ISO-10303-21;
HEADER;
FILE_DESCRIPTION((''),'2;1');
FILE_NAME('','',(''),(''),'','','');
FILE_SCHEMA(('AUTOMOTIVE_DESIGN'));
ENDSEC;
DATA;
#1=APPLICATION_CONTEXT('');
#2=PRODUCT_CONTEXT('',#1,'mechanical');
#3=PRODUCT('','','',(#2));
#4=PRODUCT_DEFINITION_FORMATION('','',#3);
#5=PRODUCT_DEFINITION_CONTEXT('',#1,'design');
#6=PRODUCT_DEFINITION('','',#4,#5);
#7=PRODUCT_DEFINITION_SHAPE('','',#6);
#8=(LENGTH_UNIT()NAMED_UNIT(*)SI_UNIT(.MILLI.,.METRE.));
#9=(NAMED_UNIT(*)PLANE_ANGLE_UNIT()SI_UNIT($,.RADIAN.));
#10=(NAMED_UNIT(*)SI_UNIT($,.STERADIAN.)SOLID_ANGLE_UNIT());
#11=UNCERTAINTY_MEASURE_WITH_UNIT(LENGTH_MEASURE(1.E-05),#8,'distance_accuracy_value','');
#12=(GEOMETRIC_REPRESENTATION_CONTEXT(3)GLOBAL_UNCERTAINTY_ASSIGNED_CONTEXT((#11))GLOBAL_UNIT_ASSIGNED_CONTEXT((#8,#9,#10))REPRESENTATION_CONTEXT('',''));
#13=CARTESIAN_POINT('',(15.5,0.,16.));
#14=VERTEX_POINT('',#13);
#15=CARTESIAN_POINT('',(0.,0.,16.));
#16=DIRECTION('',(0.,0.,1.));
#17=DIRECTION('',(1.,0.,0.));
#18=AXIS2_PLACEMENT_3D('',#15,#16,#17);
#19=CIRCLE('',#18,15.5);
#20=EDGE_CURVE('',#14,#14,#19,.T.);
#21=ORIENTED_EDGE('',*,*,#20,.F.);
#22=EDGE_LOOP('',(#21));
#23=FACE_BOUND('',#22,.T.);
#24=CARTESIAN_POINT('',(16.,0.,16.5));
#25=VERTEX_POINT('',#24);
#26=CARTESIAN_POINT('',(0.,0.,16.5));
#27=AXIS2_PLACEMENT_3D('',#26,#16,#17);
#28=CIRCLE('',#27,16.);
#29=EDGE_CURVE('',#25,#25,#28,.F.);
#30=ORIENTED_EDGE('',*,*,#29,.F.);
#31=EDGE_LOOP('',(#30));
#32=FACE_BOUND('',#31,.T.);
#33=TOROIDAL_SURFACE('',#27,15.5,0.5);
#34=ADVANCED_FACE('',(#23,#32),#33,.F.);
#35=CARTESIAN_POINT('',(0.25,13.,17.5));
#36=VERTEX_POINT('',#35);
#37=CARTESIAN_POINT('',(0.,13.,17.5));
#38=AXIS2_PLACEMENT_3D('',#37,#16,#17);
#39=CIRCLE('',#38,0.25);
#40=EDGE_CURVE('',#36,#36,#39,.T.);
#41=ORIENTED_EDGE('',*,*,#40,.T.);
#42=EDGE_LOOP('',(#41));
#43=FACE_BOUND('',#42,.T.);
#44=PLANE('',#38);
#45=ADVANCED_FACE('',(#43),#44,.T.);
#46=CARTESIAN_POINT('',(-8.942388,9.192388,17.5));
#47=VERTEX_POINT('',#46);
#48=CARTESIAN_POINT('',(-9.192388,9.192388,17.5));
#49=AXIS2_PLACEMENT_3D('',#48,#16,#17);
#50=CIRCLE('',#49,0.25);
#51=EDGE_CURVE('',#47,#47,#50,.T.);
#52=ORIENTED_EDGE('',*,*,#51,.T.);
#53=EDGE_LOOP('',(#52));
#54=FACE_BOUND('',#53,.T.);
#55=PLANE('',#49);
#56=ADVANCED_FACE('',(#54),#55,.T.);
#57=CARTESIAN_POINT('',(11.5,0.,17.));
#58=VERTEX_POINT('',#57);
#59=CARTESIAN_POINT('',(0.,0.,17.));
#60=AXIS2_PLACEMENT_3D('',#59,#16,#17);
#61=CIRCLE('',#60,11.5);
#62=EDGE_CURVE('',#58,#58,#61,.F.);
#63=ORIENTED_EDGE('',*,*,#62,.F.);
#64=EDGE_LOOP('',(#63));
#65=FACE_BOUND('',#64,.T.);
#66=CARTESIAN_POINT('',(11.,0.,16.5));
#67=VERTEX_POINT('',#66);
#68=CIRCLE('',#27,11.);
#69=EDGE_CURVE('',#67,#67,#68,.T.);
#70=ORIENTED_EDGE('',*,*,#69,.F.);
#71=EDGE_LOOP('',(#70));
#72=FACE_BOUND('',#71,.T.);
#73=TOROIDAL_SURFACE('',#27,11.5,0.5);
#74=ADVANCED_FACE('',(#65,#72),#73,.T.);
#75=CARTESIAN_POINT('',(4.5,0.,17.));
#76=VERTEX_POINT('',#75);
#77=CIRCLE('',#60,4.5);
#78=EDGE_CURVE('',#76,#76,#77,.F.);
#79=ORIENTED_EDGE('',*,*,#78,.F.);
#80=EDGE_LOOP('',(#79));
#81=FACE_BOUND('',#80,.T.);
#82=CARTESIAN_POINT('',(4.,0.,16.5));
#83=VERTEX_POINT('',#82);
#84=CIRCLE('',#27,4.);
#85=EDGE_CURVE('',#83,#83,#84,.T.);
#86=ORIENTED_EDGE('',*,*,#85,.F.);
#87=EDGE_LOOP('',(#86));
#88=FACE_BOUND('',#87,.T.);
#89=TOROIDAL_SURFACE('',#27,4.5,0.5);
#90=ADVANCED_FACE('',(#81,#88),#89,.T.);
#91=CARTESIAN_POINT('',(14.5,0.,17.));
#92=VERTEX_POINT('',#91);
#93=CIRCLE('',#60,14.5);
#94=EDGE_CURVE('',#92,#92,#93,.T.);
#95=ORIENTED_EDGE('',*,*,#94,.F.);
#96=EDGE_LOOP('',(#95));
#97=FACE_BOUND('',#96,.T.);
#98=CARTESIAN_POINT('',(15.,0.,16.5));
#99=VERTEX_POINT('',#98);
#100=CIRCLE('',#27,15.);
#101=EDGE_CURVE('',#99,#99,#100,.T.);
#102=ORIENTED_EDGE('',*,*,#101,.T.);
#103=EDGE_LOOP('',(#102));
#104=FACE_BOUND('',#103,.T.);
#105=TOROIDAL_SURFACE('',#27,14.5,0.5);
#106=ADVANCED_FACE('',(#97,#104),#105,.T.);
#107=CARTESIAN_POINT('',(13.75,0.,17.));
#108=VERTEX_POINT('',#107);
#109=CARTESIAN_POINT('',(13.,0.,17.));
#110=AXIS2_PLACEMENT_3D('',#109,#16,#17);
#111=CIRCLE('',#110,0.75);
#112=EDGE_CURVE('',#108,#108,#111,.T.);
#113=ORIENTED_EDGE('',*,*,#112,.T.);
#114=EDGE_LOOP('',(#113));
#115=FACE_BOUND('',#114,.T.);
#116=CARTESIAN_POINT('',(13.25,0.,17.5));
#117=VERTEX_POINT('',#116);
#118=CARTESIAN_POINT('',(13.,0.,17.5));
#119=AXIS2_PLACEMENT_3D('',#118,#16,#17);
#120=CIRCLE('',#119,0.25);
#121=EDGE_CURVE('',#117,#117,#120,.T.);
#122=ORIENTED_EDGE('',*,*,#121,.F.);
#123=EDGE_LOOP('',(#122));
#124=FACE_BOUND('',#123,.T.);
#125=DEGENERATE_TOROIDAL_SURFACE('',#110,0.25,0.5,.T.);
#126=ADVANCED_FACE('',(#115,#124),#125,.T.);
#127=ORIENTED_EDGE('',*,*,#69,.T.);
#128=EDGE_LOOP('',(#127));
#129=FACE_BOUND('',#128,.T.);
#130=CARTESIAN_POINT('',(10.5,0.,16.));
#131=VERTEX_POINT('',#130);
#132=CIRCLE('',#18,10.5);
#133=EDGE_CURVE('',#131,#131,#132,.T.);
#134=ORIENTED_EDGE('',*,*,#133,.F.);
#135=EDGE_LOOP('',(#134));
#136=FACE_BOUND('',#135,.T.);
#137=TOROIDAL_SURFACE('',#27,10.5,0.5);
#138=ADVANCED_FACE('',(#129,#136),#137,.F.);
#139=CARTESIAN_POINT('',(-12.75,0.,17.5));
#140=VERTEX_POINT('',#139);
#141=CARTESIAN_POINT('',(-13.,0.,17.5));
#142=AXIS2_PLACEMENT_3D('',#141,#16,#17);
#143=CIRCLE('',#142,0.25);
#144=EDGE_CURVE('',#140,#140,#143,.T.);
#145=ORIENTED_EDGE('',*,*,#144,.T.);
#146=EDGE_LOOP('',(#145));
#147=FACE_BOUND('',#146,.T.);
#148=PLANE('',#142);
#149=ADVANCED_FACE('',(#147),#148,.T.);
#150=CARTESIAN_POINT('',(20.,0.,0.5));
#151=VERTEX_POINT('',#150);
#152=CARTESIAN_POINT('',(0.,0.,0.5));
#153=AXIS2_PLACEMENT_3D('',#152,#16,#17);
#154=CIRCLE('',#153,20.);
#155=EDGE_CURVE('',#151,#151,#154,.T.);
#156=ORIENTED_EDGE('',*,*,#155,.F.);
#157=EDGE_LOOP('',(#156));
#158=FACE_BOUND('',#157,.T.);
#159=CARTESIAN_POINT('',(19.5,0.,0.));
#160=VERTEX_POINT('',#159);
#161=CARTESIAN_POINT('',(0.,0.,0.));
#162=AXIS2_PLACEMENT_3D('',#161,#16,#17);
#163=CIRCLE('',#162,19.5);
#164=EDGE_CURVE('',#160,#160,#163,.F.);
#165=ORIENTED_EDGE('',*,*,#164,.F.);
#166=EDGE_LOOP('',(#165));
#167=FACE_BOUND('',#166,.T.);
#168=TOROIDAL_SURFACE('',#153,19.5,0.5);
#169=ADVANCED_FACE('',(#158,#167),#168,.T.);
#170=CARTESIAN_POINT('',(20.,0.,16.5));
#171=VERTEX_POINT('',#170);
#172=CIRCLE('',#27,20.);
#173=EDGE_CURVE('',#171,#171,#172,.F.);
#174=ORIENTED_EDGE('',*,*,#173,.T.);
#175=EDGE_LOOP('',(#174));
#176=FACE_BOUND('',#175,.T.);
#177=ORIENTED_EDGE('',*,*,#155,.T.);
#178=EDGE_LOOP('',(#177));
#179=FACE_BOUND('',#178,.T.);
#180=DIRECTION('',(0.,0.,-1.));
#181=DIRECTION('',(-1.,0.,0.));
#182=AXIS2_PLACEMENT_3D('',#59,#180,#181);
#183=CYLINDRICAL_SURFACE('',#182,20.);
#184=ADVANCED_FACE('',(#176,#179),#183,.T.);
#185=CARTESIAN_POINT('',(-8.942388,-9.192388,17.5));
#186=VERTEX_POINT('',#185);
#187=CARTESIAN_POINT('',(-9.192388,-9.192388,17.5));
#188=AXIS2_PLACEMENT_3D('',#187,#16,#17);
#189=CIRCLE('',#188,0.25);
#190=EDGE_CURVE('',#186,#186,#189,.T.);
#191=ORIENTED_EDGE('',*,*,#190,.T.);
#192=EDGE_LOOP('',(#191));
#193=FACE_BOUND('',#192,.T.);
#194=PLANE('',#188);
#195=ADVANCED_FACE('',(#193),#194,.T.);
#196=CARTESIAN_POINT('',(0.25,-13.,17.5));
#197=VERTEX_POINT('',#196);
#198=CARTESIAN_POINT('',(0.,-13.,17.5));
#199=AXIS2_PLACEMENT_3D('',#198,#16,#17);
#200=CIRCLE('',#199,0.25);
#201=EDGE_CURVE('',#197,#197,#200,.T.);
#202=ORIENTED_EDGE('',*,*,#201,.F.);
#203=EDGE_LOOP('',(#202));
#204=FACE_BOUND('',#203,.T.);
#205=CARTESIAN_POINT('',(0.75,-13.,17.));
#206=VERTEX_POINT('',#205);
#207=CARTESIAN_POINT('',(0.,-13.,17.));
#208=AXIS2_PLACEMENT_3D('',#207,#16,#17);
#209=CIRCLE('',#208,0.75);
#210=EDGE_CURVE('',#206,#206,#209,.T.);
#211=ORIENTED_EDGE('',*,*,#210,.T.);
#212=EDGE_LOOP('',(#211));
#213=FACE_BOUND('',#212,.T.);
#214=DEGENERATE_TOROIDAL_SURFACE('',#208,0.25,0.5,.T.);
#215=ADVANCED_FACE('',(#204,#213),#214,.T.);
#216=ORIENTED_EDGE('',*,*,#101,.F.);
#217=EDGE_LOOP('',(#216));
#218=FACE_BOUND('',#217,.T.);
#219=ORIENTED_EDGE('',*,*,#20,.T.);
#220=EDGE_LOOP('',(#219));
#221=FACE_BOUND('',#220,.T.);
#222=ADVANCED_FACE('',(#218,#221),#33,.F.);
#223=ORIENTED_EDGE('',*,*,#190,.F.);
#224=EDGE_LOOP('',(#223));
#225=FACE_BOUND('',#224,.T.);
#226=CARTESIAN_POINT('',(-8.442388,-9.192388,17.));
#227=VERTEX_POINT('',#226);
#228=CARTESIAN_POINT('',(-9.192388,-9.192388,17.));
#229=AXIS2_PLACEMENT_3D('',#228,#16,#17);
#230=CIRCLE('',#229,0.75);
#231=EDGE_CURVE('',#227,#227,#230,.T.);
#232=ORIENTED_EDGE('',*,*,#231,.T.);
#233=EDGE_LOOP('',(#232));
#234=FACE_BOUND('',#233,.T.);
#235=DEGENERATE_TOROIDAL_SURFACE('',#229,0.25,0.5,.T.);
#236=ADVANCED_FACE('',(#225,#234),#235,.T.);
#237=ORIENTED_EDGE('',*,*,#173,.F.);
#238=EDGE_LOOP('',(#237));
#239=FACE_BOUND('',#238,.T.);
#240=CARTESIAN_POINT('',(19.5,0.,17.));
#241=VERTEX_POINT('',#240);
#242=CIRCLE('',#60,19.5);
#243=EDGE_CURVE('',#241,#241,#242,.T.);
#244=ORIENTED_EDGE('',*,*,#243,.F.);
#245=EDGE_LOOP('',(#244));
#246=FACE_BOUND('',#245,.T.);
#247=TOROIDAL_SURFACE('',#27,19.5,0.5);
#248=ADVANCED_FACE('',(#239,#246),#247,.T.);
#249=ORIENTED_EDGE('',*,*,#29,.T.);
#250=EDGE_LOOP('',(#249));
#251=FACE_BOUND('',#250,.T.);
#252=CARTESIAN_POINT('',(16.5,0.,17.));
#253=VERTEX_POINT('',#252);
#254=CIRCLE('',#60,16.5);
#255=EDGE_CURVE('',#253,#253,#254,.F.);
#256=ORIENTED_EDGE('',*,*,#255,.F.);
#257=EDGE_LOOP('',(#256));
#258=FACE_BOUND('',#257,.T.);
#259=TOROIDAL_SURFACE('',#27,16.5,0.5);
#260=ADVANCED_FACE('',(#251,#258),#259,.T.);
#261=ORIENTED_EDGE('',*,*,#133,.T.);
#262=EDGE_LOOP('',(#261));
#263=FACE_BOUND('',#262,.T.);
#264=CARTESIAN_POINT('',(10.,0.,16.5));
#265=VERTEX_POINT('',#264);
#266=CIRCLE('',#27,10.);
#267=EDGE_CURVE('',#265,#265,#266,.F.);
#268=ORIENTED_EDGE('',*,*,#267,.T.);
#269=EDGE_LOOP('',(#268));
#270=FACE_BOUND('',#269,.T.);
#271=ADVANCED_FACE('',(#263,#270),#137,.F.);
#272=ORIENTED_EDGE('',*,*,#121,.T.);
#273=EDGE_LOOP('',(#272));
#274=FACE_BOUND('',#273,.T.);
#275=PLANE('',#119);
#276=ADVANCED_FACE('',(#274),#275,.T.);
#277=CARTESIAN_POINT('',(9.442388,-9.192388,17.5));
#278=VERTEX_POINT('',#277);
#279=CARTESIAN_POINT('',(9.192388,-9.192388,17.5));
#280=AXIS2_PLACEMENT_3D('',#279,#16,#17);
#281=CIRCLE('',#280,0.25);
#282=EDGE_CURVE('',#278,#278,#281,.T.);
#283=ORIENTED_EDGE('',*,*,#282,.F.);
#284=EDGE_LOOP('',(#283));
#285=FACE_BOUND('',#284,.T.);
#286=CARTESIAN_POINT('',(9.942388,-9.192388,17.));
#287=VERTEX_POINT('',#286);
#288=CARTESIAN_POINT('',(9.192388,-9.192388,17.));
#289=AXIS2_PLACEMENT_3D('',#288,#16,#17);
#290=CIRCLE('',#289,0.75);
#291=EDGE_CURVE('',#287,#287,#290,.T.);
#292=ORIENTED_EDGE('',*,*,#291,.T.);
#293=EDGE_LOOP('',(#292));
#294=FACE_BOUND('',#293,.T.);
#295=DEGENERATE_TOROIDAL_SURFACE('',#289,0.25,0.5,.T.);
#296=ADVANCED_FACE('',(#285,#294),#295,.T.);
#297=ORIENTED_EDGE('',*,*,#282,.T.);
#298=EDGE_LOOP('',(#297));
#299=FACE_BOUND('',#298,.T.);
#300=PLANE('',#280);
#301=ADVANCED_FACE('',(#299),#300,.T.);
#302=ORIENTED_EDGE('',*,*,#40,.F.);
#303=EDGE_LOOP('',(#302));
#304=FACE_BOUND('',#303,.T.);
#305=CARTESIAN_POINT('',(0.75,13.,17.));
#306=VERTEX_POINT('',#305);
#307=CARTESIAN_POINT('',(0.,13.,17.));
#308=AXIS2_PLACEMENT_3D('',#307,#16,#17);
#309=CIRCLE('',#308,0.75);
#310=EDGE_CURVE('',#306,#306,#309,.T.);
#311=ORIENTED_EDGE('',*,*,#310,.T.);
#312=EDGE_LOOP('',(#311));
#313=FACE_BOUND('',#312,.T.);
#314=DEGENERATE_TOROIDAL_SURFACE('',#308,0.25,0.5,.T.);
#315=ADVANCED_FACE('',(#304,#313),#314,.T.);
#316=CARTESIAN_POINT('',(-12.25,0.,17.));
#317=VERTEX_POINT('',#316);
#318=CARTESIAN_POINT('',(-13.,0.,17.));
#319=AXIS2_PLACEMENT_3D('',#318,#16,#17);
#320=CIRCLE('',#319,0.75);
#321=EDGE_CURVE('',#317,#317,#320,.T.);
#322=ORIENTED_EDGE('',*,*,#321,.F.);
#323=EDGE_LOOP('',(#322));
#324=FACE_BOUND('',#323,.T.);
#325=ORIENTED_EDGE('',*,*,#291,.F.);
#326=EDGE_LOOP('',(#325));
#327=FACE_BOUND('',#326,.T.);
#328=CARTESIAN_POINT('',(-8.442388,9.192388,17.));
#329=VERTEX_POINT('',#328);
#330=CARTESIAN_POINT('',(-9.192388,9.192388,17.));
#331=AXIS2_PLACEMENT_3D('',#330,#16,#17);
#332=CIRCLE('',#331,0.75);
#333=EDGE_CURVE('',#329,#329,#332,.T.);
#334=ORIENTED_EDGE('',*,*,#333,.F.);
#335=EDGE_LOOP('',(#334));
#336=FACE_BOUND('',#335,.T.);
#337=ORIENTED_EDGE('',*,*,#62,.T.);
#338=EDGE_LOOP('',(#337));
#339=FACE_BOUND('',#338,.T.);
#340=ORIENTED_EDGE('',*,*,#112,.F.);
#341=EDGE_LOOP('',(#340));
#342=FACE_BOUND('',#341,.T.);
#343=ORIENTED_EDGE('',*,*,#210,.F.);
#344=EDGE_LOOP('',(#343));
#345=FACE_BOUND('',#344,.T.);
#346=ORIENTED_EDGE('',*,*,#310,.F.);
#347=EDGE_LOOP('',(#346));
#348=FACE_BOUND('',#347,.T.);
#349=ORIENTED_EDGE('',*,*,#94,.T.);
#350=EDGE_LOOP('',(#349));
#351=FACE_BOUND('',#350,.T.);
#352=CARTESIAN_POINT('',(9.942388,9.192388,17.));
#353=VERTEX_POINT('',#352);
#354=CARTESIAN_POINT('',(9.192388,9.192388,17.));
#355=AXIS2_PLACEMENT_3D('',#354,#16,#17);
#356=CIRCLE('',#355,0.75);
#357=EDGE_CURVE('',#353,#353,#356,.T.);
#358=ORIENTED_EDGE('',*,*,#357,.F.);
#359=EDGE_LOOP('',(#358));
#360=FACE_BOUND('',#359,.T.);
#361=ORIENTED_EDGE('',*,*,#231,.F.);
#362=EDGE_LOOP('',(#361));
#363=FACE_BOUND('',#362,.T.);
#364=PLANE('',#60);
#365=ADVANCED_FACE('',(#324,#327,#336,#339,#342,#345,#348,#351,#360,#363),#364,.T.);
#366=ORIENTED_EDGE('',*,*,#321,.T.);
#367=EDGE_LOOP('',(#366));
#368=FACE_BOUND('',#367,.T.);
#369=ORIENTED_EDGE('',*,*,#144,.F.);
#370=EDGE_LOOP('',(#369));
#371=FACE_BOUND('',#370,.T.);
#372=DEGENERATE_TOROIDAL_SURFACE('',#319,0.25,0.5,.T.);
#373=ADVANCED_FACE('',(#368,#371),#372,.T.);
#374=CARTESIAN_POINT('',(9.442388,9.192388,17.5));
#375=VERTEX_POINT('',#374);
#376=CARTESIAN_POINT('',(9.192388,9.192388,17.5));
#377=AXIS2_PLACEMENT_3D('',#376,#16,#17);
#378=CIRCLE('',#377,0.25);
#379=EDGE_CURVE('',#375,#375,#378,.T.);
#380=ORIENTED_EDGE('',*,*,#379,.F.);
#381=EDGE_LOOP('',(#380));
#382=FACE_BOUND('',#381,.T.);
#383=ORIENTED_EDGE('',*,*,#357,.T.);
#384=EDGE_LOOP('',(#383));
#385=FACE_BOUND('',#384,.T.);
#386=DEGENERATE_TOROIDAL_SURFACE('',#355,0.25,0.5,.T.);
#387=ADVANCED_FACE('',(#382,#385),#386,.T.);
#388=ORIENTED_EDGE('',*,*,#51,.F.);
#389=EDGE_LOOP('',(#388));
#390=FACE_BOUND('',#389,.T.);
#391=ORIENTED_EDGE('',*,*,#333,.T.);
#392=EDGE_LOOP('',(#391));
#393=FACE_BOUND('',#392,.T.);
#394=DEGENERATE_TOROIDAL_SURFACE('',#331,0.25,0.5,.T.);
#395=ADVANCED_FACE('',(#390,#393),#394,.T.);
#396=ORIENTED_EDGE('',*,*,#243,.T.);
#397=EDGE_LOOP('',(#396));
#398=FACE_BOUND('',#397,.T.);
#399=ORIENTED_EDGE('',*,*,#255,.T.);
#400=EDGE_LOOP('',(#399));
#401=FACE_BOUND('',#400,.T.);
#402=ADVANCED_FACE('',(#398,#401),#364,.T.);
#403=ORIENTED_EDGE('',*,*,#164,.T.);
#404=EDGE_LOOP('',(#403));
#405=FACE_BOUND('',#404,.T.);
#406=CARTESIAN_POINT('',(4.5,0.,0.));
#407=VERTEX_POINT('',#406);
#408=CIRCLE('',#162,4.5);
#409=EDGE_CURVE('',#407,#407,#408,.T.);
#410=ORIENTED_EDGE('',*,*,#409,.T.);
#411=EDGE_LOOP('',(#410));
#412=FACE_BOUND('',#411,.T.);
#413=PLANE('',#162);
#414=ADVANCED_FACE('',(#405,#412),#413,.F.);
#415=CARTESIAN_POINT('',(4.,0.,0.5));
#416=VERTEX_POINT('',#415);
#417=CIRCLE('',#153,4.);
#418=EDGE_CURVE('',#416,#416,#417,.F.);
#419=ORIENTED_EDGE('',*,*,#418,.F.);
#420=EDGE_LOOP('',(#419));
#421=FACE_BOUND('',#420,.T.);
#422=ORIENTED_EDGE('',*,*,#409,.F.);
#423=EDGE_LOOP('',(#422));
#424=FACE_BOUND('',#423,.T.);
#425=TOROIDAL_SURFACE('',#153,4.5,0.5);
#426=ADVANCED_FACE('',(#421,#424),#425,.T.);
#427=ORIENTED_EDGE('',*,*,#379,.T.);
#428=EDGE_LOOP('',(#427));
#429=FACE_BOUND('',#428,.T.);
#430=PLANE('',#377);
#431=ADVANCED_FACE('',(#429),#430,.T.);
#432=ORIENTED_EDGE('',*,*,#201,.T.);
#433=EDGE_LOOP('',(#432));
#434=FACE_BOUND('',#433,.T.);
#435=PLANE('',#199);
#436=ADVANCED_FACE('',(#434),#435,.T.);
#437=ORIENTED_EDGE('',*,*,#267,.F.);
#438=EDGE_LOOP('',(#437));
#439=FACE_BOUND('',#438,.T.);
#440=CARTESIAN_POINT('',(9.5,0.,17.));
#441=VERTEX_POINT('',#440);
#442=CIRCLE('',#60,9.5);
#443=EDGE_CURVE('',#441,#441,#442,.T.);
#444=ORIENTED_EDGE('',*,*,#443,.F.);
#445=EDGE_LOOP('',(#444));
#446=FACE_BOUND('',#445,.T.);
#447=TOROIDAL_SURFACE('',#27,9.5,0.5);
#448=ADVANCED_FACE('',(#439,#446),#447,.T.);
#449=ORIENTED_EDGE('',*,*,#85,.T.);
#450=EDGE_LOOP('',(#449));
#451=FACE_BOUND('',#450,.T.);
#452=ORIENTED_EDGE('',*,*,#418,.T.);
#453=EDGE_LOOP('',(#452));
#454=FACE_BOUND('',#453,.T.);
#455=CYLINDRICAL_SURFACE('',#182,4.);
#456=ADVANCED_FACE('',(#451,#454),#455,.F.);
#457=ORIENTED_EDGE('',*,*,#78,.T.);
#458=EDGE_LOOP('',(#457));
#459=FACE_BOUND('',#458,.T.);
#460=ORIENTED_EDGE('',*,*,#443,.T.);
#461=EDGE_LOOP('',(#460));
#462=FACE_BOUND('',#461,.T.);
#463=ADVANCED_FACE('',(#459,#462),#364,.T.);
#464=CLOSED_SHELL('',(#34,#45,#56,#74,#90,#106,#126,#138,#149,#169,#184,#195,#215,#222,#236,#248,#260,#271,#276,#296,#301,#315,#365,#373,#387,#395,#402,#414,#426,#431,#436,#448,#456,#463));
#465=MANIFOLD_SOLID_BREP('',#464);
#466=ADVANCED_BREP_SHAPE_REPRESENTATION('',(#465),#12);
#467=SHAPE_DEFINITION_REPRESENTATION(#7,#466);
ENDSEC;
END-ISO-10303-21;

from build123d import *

# Parameters (mm, degrees)
SKETCH1_R           = 20
SKETCH1_R_2         = 4
BOSS_EXTRUDE2_DEPTH = 17
SKETCH3_R           = 16
SKETCH3_R_2         = 15
CUT_EXTRUDE1_DEPTH  = 1
FILLET9_R           = 0.5
FILLET10_R          = 0.5
SKETCH4_R           = 11
SKETCH4_R_2         = 10
CUT_EXTRUDE2_DEPTH  = 1
FILLET11_R          = 0.5
FILLET12_R          = 0.5
SKETCH6_R           = 0.75
BOSS_EXTRUDE5_DEPTH = 0.5
FILLET17_R          = 0.5
FILLET18_R          = 0.5
FILLET19_R          = 0.5
FILLET20_R          = 0.5


with BuildPart() as part:
    # Sketch1 → Boss-Extrude2 (new body)
    with BuildSketch(Plane.XY):
        Circle(SKETCH1_R)
        Circle(SKETCH1_R_2, mode=Mode.SUBTRACT)
    extrude(amount=BOSS_EXTRUDE2_DEPTH)

    # Sketch3 → Cut-Extrude1 (cut)
    with BuildSketch(Plane.XY.offset(17)):
        Circle(SKETCH3_R)
        Circle(SKETCH3_R_2, mode=Mode.SUBTRACT)
    extrude(amount=-CUT_EXTRUDE1_DEPTH, mode=Mode.SUBTRACT)

    # Fillet9
    fillet9_edges = [part.edges().sort_by_distance(p)[0] for p in [
        (-16, 0, 16),
        (-15, 0, 16),
    ]]
    fillet(fillet9_edges, radius=FILLET9_R - 0.0001)  # a hair under: the kernel refuses the full size

    # Fillet10
    fillet10_edges = [part.edges().sort_by_distance(p)[0] for p in [
        (-16, 0, 17),
        (-15, 0, 17),
    ]]
    fillet(fillet10_edges, radius=FILLET10_R)

    # Sketch4 → Cut-Extrude2 (cut)
    with BuildSketch(Plane.XY.offset(17)):
        Circle(SKETCH4_R)
        Circle(SKETCH4_R_2, mode=Mode.SUBTRACT)
    extrude(amount=-CUT_EXTRUDE2_DEPTH, mode=Mode.SUBTRACT)

    # Fillet11
    fillet11_edges = [part.edges().sort_by_distance(p)[0] for p in [
        (-11, 0, 16),
        (-10, 0, 16),
    ]]
    fillet(fillet11_edges, radius=FILLET11_R - 0.0001)  # a hair under: the kernel refuses the full size
    fillet11_2_edges = [part.edges().sort_by_distance(p)[0] for p in [
        (-11, 0, 17),
        (-10, 0, 17),
    ]]
    fillet(fillet11_2_edges, radius=FILLET11_R)

    # Fillet12
    fillet12_edges = [part.edges().sort_by_distance(p)[0] for p in [
        (-20, 0, 0),
        (-20, 0, 17),
    ]]
    fillet(fillet12_edges, radius=FILLET12_R)

    # Sketch6 → Boss-Extrude5 (add)
    with BuildSketch(Plane.XY.offset(17)):
        with Locations((0, 13)):
            Circle(SKETCH6_R)
        with Locations((9.192388155, 9.192388155)):
            Circle(SKETCH6_R)
        with Locations((13, 0)):
            Circle(SKETCH6_R)
        with Locations((9.192388155, -9.192388155)):
            Circle(SKETCH6_R)
        with Locations((0, -13)):
            Circle(SKETCH6_R)
        with Locations((-9.192388155, -9.192388155)):
            Circle(SKETCH6_R)
        with Locations((-13, 0)):
            Circle(SKETCH6_R)
        with Locations((-9.192388155, 9.192388155)):
            Circle(SKETCH6_R)
    extrude(amount=BOSS_EXTRUDE5_DEPTH)

    # Fillet17
    fillet17_edges = [part.edges().sort_by_distance(p)[0] for p in [
        (-4, 0, 0),
        (-4, 0, 17),
    ]]
    fillet(fillet17_edges, radius=FILLET17_R)

    # Fillet18
    fillet18_edges = [part.edges().sort_by_distance(p)[0] for p in [
        (8.442388155, -9.192388155, 17.5),
    ]]
    fillet(fillet18_edges, radius=FILLET18_R - 0.0001)  # a hair under: the kernel refuses the full size

    # Fillet19
    fillet19_edges = [part.edges().sort_by_distance(p)[0] for p in [
        (-0.75, -13, 17.5),
    ]]
    fillet(fillet19_edges, radius=FILLET19_R - 0.0001)  # a hair under: the kernel refuses the full size

    # Fillet20
    fillet20_edges = [part.edges().sort_by_distance(p)[0] for p in [
        (-0.75, 13, 17.5),
        (8.442388155, 9.192388155, 17.5),
        (12.25, 0, 17.5),
        (-9.942388155, -9.192388155, 17.5),
        (-13.75, 0, 17.5),
        (-9.942388155, 9.192388155, 17.5),
    ]]
    fillet(fillet20_edges, radius=FILLET20_R - 0.0001)  # a hair under: the kernel refuses the full size


solid = part.part
